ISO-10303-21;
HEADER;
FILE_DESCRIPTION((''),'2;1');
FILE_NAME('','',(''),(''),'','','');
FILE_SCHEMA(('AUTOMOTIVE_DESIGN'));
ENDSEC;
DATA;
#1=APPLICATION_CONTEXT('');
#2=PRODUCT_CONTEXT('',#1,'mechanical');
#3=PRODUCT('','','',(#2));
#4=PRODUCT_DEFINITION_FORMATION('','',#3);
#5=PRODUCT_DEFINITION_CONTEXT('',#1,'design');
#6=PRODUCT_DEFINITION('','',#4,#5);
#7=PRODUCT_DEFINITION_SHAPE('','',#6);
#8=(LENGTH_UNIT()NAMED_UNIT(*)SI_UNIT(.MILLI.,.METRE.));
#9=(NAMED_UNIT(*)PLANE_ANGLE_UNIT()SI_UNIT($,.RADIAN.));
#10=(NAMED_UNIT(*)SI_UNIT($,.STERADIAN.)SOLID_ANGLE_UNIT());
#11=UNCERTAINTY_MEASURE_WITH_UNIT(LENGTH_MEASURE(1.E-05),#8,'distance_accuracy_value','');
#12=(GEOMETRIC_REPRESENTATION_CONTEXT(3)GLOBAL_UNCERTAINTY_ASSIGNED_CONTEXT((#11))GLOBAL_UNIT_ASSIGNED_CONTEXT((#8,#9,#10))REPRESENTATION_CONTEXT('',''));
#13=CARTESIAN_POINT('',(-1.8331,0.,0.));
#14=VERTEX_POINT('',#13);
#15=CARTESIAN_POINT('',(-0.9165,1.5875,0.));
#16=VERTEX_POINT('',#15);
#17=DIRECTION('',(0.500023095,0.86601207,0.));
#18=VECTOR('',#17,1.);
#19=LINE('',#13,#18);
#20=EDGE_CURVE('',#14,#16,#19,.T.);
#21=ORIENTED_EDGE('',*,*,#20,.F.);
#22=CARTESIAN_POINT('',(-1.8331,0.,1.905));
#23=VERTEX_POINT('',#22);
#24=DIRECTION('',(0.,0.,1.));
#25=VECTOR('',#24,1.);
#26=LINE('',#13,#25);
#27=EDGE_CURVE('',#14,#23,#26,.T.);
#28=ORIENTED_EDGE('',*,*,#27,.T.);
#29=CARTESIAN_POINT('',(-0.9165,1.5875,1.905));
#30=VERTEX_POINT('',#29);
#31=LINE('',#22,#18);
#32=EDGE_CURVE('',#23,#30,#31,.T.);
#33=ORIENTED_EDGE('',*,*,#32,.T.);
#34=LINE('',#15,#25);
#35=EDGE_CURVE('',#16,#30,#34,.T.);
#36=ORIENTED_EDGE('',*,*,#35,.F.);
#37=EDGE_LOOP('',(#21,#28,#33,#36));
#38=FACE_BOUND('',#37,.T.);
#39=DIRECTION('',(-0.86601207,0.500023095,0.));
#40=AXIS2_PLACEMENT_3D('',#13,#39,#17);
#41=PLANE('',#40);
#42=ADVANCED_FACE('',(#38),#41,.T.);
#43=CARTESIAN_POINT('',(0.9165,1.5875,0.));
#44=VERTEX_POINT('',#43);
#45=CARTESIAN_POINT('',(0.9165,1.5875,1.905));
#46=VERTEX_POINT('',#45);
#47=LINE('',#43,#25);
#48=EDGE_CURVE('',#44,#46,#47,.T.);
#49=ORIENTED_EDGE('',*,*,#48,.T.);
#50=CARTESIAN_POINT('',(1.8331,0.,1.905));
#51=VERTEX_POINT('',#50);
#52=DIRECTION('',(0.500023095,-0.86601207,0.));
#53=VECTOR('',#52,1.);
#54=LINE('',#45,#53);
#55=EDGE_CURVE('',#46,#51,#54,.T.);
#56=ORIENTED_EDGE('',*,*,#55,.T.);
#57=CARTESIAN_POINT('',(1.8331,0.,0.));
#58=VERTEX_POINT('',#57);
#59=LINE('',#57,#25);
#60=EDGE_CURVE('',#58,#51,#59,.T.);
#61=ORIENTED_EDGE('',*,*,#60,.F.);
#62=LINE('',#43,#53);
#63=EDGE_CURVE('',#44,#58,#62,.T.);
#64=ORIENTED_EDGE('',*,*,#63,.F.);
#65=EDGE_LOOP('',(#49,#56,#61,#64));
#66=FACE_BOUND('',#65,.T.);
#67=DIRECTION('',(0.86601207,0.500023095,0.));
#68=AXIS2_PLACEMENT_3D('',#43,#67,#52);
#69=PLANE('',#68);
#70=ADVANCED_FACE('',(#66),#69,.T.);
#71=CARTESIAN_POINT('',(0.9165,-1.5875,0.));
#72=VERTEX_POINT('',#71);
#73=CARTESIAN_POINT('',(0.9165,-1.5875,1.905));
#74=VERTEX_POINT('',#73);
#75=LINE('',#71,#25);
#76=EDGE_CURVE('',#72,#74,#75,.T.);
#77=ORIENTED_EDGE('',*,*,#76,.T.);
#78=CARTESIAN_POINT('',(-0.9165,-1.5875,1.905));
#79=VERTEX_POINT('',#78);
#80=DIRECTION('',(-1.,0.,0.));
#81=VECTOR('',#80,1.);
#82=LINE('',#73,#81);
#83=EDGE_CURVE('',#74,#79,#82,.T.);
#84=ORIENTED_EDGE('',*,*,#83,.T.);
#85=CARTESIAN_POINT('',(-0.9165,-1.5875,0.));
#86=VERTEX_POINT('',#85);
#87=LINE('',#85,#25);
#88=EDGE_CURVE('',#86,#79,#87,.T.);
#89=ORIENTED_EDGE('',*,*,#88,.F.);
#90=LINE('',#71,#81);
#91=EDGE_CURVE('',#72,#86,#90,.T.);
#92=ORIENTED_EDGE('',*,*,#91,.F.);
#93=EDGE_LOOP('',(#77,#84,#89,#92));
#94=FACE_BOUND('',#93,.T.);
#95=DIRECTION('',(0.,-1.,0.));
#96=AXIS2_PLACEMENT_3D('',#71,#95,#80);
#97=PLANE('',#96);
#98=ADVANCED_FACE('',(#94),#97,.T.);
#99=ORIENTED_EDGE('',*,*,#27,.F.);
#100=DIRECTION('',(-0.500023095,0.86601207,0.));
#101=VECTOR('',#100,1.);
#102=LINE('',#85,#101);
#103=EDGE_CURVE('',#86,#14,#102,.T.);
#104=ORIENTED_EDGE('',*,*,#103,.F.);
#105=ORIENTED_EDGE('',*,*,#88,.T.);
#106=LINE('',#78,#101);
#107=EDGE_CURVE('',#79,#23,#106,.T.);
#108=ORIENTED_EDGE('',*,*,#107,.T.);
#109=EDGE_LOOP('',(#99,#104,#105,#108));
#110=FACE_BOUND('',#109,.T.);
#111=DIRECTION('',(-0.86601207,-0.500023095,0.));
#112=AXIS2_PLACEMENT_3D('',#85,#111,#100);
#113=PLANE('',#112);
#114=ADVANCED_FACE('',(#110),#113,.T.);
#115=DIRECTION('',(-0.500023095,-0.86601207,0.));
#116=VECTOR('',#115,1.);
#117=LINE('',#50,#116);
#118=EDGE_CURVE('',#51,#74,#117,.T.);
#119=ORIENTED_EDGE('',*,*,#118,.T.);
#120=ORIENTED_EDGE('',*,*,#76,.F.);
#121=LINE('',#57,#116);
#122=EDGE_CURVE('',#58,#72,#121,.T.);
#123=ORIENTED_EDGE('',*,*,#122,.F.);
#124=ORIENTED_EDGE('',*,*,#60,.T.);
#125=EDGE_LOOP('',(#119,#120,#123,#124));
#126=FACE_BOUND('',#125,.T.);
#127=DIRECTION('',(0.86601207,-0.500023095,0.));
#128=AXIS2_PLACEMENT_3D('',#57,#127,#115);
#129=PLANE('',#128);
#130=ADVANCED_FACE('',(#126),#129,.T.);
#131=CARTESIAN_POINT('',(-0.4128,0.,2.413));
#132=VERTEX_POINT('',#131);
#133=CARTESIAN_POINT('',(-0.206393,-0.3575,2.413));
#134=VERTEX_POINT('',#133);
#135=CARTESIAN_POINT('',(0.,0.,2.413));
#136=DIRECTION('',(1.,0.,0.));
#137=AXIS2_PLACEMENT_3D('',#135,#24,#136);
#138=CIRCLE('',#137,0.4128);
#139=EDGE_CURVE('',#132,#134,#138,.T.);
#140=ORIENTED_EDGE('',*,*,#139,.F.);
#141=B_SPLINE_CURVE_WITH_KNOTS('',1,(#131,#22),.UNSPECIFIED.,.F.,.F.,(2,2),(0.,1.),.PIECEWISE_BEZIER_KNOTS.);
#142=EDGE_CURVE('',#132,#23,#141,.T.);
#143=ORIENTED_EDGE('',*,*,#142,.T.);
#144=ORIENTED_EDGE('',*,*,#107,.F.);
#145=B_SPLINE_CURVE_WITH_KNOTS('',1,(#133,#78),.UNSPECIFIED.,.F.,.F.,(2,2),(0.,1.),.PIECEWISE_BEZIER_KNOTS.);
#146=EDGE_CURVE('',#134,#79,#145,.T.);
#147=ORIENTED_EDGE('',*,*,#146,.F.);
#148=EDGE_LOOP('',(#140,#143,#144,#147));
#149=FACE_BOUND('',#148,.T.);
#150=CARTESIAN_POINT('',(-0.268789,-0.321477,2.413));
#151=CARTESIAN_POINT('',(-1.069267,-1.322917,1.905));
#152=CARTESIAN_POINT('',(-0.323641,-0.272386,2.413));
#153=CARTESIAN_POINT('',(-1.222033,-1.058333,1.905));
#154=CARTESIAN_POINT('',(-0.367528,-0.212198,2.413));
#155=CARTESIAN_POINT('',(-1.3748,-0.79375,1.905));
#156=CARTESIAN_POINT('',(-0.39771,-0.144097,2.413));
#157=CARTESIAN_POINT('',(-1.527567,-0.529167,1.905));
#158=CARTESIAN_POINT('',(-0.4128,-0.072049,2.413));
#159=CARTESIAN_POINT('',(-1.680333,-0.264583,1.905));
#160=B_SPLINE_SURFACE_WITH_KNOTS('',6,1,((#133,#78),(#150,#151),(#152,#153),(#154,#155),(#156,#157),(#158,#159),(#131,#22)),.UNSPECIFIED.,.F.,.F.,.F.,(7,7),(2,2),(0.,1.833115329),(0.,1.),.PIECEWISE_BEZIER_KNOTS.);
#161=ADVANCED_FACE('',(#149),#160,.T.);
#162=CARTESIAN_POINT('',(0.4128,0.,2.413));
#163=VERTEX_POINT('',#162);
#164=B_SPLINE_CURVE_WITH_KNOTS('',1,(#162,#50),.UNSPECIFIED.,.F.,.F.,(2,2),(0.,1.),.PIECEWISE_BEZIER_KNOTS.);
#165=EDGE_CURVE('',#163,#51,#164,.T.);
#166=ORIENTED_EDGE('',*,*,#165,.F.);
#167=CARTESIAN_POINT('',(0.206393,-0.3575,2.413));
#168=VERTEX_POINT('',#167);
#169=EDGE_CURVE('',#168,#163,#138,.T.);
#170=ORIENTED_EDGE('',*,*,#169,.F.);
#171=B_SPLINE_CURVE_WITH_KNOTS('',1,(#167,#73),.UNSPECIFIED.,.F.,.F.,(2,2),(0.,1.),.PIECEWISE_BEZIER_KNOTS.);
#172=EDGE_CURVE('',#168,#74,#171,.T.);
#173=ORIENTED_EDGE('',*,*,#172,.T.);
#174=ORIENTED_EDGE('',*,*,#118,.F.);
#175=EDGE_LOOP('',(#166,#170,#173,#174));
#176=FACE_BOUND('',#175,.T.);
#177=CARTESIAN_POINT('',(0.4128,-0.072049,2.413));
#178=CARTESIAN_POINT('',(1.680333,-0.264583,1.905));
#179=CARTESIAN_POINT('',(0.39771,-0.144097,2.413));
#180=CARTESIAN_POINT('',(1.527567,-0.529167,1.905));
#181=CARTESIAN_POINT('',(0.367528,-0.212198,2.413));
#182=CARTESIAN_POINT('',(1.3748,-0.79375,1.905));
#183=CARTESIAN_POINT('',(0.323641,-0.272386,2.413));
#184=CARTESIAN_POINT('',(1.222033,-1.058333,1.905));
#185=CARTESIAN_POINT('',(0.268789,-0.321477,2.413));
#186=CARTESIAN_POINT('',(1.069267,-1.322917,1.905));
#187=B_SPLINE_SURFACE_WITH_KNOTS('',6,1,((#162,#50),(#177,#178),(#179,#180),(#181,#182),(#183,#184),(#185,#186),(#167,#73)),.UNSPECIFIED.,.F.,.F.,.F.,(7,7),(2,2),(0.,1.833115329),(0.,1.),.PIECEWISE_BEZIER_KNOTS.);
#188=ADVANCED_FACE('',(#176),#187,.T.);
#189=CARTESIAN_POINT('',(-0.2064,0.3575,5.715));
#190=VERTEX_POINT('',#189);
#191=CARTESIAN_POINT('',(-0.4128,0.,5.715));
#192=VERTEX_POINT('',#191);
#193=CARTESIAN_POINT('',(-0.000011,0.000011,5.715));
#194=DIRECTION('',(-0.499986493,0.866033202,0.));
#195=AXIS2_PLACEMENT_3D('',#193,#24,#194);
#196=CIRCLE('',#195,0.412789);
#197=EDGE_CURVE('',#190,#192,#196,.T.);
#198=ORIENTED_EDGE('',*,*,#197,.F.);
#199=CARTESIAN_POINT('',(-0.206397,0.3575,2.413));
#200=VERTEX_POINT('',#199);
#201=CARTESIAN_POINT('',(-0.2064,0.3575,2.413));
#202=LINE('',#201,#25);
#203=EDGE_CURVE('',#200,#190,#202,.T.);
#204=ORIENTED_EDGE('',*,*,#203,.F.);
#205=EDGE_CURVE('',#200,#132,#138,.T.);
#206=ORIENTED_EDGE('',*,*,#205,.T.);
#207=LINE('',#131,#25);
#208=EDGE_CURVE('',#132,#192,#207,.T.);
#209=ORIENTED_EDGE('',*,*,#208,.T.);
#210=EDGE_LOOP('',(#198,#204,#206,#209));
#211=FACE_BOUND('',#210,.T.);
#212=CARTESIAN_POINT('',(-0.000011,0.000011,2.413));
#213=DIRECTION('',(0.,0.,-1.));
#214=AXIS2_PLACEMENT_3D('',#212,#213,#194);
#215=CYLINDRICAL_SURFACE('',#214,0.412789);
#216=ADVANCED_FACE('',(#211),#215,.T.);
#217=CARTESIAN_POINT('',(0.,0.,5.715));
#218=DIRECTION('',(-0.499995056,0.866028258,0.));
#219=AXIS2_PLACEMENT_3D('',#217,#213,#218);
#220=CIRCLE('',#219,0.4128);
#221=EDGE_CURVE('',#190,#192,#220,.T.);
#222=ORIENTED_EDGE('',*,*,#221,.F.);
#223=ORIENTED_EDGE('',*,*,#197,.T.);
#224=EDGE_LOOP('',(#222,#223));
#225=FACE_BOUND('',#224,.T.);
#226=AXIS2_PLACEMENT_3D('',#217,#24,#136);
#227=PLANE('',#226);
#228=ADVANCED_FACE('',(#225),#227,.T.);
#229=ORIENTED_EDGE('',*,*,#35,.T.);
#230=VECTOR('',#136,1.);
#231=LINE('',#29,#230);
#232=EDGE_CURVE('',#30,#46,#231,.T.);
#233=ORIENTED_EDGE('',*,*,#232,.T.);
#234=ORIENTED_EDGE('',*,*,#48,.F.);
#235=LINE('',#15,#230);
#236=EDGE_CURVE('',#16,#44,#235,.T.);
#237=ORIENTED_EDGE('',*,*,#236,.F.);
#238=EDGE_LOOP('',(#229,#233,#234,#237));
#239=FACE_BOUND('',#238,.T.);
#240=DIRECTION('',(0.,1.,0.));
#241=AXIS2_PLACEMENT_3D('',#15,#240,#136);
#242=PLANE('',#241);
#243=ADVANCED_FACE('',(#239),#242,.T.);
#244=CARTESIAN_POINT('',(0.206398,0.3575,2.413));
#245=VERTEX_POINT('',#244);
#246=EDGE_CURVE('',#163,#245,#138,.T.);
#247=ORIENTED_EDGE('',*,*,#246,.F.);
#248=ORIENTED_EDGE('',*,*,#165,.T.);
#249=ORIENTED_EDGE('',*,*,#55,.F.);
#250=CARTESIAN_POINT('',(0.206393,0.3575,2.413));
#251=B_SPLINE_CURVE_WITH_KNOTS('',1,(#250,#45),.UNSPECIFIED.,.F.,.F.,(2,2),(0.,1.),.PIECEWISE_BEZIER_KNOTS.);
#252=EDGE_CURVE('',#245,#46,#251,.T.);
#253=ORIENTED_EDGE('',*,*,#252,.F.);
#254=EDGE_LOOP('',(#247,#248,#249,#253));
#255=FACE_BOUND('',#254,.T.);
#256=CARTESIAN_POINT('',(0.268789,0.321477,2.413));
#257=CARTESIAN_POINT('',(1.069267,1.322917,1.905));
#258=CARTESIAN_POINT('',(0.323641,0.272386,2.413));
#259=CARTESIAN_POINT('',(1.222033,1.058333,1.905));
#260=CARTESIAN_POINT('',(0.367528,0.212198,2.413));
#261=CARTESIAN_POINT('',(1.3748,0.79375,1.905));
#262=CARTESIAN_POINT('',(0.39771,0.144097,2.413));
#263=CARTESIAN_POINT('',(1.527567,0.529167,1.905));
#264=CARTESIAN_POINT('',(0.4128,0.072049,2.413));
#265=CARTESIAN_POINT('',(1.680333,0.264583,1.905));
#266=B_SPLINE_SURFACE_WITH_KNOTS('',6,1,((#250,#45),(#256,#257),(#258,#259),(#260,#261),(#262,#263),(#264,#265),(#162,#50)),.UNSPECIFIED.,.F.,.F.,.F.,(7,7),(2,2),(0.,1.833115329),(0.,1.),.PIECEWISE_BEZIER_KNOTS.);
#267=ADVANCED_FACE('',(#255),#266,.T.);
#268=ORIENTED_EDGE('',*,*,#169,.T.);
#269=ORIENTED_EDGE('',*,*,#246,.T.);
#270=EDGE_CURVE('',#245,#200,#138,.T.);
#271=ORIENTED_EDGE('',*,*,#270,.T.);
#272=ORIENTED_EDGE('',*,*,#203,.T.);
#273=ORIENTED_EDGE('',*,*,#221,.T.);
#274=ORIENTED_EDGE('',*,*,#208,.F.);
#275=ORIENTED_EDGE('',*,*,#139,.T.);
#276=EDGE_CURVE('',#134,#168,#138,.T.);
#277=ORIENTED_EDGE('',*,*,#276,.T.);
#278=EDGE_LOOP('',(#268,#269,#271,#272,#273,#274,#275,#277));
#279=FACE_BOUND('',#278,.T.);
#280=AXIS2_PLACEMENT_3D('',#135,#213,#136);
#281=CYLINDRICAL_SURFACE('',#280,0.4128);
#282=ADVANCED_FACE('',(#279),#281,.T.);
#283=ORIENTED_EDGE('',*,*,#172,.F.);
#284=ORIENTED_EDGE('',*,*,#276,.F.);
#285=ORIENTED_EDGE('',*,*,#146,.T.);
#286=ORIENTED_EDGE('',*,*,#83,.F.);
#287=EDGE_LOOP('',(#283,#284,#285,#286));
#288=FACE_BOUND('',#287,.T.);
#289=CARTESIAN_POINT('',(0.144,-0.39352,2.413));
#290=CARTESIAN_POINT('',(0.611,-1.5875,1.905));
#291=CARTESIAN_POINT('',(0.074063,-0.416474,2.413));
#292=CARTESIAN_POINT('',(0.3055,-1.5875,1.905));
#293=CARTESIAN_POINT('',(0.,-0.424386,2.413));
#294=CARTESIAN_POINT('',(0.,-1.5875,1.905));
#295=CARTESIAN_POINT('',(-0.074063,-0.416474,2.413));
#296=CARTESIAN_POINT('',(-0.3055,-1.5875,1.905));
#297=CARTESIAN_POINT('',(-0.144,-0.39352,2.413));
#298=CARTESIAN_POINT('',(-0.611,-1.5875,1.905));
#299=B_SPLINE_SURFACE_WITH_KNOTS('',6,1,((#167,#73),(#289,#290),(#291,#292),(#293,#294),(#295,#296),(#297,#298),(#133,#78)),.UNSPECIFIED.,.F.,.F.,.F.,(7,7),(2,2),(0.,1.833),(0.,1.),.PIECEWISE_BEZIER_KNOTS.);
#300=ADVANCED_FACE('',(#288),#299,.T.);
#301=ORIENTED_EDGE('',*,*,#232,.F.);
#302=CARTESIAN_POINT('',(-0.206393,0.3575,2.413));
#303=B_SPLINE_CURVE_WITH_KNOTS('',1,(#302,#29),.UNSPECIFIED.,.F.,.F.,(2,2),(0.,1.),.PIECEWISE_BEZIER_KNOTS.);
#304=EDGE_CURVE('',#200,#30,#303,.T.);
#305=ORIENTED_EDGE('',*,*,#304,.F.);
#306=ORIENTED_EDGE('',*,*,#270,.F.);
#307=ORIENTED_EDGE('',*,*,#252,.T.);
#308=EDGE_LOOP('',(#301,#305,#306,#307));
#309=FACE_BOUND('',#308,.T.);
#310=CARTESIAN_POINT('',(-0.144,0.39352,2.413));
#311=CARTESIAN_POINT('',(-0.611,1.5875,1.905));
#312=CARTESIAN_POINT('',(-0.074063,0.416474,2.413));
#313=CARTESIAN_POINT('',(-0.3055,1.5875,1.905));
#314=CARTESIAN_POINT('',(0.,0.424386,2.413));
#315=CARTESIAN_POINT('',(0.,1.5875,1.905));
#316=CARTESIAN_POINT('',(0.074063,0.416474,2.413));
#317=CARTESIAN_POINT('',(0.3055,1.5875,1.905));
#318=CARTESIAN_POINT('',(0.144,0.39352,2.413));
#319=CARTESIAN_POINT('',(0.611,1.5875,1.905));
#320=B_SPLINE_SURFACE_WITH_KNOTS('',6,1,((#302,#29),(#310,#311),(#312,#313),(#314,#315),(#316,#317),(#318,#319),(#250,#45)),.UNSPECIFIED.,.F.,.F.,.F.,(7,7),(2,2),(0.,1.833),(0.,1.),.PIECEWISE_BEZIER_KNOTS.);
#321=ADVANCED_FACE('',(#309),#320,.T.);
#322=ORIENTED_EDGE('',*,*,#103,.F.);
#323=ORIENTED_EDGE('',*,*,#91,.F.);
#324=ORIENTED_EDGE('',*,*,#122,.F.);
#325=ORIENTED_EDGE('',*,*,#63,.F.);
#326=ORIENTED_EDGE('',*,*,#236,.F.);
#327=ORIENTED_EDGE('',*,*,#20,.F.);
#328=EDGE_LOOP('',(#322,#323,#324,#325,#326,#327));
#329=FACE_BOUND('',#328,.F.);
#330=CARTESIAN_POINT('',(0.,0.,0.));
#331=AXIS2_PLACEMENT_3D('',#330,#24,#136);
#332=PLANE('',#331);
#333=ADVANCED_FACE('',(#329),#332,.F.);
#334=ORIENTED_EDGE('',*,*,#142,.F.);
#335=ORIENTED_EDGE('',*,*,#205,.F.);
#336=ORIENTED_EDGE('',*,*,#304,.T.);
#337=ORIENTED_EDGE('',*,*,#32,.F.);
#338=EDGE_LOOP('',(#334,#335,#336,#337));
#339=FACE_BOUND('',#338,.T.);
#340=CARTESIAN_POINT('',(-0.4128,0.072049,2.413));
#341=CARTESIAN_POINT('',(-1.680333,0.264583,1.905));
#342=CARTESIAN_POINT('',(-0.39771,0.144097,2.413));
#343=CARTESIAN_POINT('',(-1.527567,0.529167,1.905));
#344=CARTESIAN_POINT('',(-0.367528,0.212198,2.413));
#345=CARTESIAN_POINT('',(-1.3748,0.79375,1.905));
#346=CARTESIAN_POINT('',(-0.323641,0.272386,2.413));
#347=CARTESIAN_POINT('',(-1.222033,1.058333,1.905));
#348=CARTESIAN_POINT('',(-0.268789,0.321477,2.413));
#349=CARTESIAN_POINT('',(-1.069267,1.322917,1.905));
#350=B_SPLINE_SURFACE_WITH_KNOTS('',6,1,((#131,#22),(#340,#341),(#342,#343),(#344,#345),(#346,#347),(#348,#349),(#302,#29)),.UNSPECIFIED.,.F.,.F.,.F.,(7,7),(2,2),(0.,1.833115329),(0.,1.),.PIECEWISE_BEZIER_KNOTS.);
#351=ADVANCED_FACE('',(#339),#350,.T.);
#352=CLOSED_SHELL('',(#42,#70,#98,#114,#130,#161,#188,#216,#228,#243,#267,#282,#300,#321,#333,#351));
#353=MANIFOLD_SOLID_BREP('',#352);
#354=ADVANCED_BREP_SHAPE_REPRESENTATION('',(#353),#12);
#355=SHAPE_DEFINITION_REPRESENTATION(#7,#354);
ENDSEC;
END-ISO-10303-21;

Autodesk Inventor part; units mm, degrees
ref_plane "YZ Plane" through (0, 0, 0) normal (1, 0, 0) x (0, 1, 0)
ref_plane "XZ Plane" through (0, 0, 0) normal (0, 1, 0) x (-1, 0, 0)
ref_plane "XY Plane" through (0, 0, 0) normal (0, 0, 1) x (1, 0, 0)
sketch "Sketch1" plane through (0, 0, 0) normal (0, 0, 1) x (1, 0, 0)
  line L0 (-1.8331, 0) -> (-0.9165, 1.5875)
  line L1 (-0.9165, 1.5875) -> (0.9165, 1.5875)
  line L2 (0.9165, 1.5875) -> (1.8331, 0)
  line L3 (1.8331, 0) -> (0.9165, -1.5875)
  line L4 (0.9165, -1.5875) -> (-0.9165, -1.5875)
  line L5 (-0.9165, -1.5875) -> (-1.8331, 0)
  line L6 (0, -1.5875) -> (0, 1.5875) construction
  point P0 (0, 0)
  dimension "d1" = 0
  dimension "d3" = 120
  dimension "d7" = 3.175
extrude "Extrusion1" add sketch "Sketch1" along normal blind 1.905
sketch "Sketch2" plane through (0, 0, 1.905) normal (0, 0, 1) x (1, 0, 0)
  circle A0 centre (0, 0) radius 0.4128
  dimension "d6" = 0.8255
extrude "Extrusion2" add sketch "Sketch2" along normal blind 0.508
loft "Loft1" add section 1 edges at (-0.4128, 0, 2.413) section 2 edges at (0, -1.5875, 1.905) (1.3748, -0.7937, 1.905) (1.3748, 0.7938, 1.905) (0, 1.5875, 1.905) (-1.3748, 0.7937, 1.905) (-1.3748, -0.7938, 1.905)
sketch "Sketch3" plane through (0, 0, 2.413) normal (0, 0, 1) x (1, 0, 0)
  arc A0 (-0.2064, 0.3575) -> (-0.4128, 0) centre (0, 0) ccw projected
  circle A1 centre (0, 0) radius 0.4128
  arc A2 (0.4128, 0) -> (0.2064, 0.3575) centre (0, 0) ccw projected
  point P0 (0.3575, 0.2064)
  point P1 (-0.4128, 0)
  dimension "d15" = 0.8255
extrude "Extrusion3" add sketch "Sketch3" along normal blind 3.302
properties part number "FeedThroughCap"
